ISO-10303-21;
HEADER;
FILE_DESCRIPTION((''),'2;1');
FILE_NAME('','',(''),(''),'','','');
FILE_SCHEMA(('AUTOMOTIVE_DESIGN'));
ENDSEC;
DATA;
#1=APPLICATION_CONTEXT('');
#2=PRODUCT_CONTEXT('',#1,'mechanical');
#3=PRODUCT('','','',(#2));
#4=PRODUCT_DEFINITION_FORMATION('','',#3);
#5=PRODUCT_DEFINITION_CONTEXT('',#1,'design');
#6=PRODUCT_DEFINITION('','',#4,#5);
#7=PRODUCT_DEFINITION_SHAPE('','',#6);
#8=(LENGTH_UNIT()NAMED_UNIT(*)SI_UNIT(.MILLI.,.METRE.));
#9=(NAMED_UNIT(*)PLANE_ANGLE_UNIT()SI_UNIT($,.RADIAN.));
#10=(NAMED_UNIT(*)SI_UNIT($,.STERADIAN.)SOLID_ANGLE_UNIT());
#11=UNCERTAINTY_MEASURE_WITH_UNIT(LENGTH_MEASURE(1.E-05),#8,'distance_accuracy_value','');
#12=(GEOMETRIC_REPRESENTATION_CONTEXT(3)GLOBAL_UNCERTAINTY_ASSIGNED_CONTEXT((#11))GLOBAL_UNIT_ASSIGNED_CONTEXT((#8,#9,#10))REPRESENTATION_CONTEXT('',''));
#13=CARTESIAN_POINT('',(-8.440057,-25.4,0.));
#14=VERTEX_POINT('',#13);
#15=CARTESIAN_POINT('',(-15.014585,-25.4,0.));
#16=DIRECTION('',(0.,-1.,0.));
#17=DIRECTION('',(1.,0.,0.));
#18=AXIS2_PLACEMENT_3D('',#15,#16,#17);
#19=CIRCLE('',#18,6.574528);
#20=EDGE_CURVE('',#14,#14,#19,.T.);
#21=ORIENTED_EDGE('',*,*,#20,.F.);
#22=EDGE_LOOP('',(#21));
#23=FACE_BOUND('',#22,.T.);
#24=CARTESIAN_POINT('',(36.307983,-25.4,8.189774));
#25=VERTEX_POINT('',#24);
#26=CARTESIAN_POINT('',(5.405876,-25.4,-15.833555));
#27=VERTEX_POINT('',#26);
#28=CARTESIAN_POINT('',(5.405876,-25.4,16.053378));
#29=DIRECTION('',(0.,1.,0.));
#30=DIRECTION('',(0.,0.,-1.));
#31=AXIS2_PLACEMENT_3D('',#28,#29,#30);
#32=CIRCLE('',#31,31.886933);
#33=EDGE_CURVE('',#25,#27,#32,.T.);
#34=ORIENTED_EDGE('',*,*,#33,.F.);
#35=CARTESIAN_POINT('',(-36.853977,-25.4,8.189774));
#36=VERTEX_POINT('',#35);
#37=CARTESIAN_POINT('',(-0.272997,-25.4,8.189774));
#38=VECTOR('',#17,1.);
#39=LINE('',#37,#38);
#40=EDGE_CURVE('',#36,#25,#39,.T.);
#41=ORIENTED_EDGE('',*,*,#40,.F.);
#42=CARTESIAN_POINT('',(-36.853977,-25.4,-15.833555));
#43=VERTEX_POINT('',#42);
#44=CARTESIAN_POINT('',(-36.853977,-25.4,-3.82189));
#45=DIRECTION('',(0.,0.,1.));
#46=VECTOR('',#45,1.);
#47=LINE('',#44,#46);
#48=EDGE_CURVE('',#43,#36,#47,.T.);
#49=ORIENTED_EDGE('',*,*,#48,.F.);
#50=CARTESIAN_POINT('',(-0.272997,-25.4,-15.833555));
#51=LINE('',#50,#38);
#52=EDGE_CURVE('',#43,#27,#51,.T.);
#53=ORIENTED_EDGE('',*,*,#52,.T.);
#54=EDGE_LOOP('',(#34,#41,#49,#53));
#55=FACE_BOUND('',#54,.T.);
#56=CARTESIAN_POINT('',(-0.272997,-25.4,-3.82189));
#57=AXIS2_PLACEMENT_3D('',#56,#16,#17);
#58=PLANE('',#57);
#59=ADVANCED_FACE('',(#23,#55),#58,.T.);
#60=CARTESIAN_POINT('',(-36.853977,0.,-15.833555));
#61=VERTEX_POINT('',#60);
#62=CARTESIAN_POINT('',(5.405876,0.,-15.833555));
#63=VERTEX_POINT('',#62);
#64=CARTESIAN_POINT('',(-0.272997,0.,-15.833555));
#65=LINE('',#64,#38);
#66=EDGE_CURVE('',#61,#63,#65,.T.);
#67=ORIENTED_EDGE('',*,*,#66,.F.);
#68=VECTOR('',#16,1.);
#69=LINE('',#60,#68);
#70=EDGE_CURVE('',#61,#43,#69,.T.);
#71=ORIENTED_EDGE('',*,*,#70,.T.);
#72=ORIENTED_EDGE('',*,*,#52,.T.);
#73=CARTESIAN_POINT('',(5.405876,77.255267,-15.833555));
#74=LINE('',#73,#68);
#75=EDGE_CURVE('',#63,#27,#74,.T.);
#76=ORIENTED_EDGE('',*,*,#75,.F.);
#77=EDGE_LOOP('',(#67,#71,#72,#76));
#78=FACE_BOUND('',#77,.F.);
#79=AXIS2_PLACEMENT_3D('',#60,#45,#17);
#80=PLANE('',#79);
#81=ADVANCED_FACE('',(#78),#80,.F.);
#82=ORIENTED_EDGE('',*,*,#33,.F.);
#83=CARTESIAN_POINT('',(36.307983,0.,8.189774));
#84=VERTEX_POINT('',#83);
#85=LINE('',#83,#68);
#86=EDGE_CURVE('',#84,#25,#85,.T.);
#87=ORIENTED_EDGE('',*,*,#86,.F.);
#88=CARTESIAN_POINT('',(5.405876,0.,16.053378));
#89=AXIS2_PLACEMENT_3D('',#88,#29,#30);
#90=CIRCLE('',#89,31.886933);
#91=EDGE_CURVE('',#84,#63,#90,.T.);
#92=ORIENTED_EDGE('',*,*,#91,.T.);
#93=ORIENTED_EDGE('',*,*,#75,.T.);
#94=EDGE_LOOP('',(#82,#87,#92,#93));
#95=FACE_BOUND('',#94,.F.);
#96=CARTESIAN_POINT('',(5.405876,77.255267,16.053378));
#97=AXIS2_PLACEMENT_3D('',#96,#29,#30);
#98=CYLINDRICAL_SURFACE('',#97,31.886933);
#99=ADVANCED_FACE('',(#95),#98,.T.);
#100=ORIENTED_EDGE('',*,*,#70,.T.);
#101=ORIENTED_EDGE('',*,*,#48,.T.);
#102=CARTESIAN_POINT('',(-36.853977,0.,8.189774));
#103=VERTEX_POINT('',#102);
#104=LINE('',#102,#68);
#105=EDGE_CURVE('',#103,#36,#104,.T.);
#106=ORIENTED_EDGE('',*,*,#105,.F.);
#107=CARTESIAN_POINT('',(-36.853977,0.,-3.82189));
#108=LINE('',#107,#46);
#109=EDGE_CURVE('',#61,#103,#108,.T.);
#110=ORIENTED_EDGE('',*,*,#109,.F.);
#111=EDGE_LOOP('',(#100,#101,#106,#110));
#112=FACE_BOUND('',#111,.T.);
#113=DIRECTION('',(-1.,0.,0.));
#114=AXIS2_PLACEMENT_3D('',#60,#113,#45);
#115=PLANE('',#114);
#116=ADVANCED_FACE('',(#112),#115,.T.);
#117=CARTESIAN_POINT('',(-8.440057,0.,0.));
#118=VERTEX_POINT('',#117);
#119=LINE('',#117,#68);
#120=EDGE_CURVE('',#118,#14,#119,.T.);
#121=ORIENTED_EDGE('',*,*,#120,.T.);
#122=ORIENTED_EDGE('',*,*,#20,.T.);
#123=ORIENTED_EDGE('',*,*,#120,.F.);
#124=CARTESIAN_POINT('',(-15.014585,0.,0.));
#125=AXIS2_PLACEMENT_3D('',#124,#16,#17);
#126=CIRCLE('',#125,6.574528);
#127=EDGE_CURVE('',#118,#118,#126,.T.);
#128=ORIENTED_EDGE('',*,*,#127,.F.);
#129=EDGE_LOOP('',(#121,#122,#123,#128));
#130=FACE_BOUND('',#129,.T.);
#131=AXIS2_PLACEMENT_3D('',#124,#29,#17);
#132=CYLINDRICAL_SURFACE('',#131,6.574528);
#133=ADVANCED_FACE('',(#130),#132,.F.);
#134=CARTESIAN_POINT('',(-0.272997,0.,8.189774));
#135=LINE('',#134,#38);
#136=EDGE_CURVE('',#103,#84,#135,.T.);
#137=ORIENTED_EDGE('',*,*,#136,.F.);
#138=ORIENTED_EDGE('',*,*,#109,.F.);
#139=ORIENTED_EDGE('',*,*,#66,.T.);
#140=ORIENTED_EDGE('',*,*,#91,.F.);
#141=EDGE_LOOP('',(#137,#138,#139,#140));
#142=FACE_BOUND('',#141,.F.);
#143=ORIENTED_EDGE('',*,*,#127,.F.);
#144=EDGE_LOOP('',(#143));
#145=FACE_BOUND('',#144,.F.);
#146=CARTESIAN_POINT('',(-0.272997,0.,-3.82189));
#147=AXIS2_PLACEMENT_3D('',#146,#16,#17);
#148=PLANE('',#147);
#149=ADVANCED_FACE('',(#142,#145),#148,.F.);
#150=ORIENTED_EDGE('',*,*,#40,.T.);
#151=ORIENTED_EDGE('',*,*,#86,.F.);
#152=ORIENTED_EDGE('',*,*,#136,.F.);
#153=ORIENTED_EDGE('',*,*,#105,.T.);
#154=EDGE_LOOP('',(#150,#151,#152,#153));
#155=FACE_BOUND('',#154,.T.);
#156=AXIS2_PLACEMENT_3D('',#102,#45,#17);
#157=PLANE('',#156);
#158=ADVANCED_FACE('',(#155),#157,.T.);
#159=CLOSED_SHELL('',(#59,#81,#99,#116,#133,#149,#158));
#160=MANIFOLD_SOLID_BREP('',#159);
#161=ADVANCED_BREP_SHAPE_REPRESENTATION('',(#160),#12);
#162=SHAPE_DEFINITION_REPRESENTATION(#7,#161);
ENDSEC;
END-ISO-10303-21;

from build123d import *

# Parameters (mm, degrees)
F0_W        = 73.1619596481
F0_H        = 24.0233289078
F0_R        = 6.5745281788
F1_DEPTH    = 25.4
F2_T1_DEPTH = 179.9105347495


# Not quite as in the source:
# - a fillet or chamfer that OpenCascade refuses, or shapes differently, is made with other operations: its cross-section is extruded or revolved along the edge and cut away or added


with BuildPart() as f1:
    # F0 (on Front) → F1 (new body)
    with BuildSketch(Plane.XZ):
        with Locations((-0.2729967237, -3.8218903355)):
            Rectangle(F0_W, F0_H)
        with Locations((-15.0145851076, 0)):
            Circle(F0_R, mode=Mode.SUBTRACT)
    extrude(amount=F1_DEPTH)

    # F2: fillet of radius 31.8869327318 on 1 edges, made by hand

    # F2_s2 → F2_t1 (cut)
    with BuildSketch(Plane.XZ.offset(-77.2552673747)):
        with BuildLine():
            ThreePointArc((5.4058761505, -15.8335547894), (24.9766486554, -9.1212390876), (36.3079831004, 8.1897741184))
            Line((36.3079831004, 8.1897741184), (36.3079831004, -15.8335547894))
            Line((36.3079831004, -15.8335547894), (5.4058761505, -15.8335547894))
        make_face()
    extrude(amount=F2_T1_DEPTH, mode=Mode.SUBTRACT)


solid = f1.part
